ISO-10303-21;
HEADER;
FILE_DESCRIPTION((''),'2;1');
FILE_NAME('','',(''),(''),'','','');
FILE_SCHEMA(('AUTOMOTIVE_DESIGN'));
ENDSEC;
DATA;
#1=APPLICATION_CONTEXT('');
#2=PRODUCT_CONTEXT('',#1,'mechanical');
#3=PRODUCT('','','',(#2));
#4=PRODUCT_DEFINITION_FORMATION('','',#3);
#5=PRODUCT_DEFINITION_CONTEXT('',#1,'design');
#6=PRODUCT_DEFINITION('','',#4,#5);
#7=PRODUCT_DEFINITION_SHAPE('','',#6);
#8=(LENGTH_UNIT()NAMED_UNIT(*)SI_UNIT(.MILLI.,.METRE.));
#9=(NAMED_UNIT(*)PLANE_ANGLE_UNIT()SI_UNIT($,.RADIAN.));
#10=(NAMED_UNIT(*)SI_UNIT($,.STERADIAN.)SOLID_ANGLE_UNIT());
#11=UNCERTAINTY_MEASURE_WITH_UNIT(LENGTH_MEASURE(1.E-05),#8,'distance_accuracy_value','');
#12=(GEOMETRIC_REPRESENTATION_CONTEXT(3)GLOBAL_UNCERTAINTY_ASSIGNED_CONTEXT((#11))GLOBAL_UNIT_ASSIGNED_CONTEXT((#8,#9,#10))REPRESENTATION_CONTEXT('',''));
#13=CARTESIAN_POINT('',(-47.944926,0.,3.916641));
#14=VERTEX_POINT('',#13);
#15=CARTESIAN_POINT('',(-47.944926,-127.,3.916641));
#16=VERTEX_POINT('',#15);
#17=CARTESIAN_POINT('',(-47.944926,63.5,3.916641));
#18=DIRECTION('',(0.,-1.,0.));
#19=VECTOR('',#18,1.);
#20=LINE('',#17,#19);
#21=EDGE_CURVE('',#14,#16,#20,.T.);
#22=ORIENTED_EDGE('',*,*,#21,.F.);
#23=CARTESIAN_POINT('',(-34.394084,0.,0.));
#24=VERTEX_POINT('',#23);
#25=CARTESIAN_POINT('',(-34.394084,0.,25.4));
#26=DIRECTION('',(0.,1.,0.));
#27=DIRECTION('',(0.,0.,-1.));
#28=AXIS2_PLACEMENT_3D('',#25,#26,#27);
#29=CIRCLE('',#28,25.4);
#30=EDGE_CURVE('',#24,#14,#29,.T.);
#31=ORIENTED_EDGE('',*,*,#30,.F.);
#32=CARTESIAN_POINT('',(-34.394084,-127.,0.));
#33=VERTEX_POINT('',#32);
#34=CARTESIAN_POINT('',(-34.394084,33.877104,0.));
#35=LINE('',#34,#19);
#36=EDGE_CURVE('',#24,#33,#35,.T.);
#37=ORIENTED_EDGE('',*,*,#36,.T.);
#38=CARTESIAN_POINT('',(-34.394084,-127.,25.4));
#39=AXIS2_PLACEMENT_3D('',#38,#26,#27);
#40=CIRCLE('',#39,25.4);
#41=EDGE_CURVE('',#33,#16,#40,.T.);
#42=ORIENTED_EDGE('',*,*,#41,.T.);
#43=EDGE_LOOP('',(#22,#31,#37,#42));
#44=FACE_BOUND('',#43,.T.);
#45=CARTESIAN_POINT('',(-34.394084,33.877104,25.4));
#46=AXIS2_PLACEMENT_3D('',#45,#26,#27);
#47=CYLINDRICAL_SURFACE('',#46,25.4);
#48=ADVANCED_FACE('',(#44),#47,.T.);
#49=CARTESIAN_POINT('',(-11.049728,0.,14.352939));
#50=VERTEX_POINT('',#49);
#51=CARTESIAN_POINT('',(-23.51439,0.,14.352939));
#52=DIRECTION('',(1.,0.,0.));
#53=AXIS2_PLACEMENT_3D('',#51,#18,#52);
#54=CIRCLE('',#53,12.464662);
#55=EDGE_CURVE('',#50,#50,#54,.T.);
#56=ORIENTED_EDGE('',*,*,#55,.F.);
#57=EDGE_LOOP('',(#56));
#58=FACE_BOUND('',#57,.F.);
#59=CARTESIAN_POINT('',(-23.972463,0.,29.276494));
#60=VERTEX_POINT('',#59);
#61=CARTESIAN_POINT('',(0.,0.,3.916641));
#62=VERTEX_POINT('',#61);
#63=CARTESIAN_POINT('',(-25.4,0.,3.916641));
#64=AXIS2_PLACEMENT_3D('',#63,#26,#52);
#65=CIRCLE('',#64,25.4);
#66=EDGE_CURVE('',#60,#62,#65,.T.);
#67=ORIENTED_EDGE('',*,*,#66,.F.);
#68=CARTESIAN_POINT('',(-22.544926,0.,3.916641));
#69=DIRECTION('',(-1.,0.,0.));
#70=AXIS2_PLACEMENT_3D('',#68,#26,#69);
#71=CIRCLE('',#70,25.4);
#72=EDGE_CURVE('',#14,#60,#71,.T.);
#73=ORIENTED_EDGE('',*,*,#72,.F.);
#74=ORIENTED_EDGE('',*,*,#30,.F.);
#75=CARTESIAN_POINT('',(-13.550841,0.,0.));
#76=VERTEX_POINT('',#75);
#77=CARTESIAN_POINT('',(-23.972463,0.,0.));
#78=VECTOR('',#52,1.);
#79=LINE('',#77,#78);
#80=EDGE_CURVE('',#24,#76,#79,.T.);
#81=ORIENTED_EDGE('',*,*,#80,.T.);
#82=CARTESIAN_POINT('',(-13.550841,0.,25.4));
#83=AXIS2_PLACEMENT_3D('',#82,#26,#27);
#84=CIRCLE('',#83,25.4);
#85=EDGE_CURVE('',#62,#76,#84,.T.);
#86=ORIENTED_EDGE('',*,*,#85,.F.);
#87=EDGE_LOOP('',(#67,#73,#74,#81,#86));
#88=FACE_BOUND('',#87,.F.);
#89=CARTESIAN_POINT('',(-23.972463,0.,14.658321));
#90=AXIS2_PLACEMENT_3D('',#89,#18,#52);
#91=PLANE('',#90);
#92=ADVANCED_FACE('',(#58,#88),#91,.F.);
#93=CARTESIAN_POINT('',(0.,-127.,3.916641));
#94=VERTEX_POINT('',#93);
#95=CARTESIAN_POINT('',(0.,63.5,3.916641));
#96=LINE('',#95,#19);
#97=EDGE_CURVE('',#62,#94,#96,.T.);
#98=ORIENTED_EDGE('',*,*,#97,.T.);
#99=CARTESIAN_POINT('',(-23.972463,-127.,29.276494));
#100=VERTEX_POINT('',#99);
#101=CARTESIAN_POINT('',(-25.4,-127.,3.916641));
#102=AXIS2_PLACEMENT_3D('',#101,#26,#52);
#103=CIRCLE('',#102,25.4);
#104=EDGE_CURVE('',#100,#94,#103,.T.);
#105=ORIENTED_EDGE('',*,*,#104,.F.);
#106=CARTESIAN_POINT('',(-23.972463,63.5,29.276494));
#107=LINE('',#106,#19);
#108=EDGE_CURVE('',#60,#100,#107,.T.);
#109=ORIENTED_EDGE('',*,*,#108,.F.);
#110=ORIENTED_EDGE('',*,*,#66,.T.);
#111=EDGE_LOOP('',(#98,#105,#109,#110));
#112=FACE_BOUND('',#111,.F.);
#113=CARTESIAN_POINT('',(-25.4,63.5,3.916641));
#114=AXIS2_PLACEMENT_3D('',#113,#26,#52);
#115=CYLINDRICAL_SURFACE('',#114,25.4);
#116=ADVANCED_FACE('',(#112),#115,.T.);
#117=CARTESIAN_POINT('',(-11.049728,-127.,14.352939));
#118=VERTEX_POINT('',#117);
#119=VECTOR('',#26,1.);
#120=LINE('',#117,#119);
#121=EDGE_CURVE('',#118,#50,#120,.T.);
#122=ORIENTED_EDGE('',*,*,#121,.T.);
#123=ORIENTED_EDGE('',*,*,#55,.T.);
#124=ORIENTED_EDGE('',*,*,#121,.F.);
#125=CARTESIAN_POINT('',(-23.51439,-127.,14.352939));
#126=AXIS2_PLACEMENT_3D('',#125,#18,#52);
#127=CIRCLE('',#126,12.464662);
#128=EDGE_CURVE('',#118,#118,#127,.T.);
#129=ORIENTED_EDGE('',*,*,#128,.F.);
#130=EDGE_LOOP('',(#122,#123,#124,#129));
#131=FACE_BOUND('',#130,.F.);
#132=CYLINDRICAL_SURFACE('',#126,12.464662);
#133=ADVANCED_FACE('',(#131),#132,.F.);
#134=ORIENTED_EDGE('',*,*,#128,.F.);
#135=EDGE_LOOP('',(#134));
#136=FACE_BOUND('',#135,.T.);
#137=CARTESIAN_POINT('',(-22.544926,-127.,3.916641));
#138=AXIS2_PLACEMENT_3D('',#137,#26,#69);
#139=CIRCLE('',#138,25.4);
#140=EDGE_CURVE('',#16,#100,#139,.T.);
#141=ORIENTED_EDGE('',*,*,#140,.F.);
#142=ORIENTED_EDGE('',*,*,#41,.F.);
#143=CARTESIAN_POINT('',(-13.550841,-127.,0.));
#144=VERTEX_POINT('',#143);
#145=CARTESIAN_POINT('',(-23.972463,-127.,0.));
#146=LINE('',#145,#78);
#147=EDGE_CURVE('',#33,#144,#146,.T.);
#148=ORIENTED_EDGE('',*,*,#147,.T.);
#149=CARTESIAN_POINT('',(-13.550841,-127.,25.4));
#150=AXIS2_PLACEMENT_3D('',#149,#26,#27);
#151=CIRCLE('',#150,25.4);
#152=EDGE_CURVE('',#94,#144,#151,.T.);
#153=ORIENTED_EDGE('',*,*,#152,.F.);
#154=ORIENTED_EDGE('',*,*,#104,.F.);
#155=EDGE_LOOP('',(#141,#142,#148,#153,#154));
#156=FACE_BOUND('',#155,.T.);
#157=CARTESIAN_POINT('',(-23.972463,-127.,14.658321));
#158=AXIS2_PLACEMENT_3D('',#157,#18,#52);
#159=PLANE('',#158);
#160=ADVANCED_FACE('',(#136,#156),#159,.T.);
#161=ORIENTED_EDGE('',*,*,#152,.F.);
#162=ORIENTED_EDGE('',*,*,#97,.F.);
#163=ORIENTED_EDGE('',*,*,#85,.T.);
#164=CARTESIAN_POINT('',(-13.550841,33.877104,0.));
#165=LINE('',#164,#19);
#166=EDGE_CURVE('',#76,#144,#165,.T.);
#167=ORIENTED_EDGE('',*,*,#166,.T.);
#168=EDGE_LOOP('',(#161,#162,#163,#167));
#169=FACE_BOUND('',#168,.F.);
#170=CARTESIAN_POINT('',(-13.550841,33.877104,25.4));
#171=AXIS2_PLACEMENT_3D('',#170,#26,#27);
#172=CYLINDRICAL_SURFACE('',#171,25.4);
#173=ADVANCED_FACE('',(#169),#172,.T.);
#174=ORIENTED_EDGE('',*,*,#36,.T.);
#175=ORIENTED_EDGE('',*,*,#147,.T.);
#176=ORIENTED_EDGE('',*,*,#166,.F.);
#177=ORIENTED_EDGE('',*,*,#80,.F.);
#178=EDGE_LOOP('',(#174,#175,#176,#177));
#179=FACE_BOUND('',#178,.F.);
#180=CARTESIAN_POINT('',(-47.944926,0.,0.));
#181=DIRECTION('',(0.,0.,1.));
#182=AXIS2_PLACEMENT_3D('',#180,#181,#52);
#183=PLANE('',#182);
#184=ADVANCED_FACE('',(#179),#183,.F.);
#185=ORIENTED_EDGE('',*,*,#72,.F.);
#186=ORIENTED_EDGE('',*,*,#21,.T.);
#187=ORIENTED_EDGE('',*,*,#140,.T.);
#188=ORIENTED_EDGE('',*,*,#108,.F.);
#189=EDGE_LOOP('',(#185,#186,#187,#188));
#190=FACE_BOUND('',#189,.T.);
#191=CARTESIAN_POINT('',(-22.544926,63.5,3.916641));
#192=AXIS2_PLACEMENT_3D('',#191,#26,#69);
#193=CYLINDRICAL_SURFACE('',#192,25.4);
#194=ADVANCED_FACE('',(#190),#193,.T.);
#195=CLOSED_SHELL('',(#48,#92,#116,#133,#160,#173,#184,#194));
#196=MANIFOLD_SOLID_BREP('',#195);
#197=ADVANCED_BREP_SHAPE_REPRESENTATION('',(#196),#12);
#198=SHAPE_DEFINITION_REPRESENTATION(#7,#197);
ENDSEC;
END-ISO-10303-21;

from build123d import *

# Parameters (mm, degrees)
F0_W        = 47.9449257255
F0_H        = 29.3166413903
F1_DEPTH    = 127
F3_R        = 12.4646622314
F4_DEPTH    = 127
F5_T1_DEPTH = 254
F6_T1_DEPTH = 194.7542070367
F7_T1_DEPTH = 194.7542070365


# Not quite as in the source:
# - a fillet or chamfer that OpenCascade refuses, or shapes differently, is made with other operations: its cross-section is extruded or revolved along the edge and cut away or added


with BuildPart() as f1:
    # F0 (on Front) → F1 (new body)
    with BuildSketch(Plane.XZ):
        with Locations((-23.9724628627, 14.6583206952)):
            Rectangle(F0_W, F0_H)
    extrude(amount=F1_DEPTH)

    # F3 (on face) → F4 (cut)
    with BuildSketch(Plane.XZ.offset(127)):
        with Locations((-23.5143899918, 14.3529390916)):
            Circle(F3_R)
    extrude(amount=-F4_DEPTH, mode=Mode.SUBTRACT)

    # F5: fillet of radius 25.4 on 2 edges, made by hand

    # F5_s2 → F5_t1 (cut)
    with BuildSketch(Plane.XZ.offset(-63.5)):
        with BuildLine():
            ThreePointArc((-47.9449257255, 3.9166413903), (-40.5054379676, 21.8771536325), (-22.5449257255, 29.3166413903))
            Line((-22.5449257255, 29.3166413903), (-47.9449257255, 29.3166413903))
            Line((-47.9449257255, 29.3166413903), (-47.9449257255, 3.9166413903))
        make_face()
        with BuildLine():
            ThreePointArc((0, 3.9166413903), (-7.4394877579, 21.8771536325), (-25.4, 29.3166413903))
            Line((-25.4, 29.3166413903), (0, 29.3166413903))
            Line((0, 29.3166413903), (0, 3.9166413903))
        make_face()
    extrude(amount=F5_T1_DEPTH, mode=Mode.SUBTRACT)

    # F6: fillet of radius 25.4 on 1 edges, made by hand

    # F6_s2 → F6_t1 (cut)
    with BuildSketch(Plane.XZ.offset(-33.8771035184)):
        with BuildLine():
            ThreePointArc((-13.5508414073, 0), (-6.4980869343, 0.9987980963), (0, 3.9166413903))
            Line((0, 3.9166413903), (0, 0))
            Line((0, 0), (-13.5508414073, 0))
        make_face()
    extrude(amount=F6_T1_DEPTH, mode=Mode.SUBTRACT)

    # F7: fillet of radius 25.4 on 1 edges, made by hand

    # F7_s2 → F7_t1 (cut)
    with BuildSketch(Plane.XZ.offset(-33.8771035183)):
        with BuildLine():
            ThreePointArc((-34.3940843182, 0), (-41.4468387912, 0.9987980963), (-47.9449257255, 3.9166413903))
            Line((-47.9449257255, 3.9166413903), (-47.9449257255, 0))
            Line((-47.9449257255, 0), (-34.3940843182, 0))
        make_face()
    extrude(amount=F7_T1_DEPTH, mode=Mode.SUBTRACT)


solid = f1.part
